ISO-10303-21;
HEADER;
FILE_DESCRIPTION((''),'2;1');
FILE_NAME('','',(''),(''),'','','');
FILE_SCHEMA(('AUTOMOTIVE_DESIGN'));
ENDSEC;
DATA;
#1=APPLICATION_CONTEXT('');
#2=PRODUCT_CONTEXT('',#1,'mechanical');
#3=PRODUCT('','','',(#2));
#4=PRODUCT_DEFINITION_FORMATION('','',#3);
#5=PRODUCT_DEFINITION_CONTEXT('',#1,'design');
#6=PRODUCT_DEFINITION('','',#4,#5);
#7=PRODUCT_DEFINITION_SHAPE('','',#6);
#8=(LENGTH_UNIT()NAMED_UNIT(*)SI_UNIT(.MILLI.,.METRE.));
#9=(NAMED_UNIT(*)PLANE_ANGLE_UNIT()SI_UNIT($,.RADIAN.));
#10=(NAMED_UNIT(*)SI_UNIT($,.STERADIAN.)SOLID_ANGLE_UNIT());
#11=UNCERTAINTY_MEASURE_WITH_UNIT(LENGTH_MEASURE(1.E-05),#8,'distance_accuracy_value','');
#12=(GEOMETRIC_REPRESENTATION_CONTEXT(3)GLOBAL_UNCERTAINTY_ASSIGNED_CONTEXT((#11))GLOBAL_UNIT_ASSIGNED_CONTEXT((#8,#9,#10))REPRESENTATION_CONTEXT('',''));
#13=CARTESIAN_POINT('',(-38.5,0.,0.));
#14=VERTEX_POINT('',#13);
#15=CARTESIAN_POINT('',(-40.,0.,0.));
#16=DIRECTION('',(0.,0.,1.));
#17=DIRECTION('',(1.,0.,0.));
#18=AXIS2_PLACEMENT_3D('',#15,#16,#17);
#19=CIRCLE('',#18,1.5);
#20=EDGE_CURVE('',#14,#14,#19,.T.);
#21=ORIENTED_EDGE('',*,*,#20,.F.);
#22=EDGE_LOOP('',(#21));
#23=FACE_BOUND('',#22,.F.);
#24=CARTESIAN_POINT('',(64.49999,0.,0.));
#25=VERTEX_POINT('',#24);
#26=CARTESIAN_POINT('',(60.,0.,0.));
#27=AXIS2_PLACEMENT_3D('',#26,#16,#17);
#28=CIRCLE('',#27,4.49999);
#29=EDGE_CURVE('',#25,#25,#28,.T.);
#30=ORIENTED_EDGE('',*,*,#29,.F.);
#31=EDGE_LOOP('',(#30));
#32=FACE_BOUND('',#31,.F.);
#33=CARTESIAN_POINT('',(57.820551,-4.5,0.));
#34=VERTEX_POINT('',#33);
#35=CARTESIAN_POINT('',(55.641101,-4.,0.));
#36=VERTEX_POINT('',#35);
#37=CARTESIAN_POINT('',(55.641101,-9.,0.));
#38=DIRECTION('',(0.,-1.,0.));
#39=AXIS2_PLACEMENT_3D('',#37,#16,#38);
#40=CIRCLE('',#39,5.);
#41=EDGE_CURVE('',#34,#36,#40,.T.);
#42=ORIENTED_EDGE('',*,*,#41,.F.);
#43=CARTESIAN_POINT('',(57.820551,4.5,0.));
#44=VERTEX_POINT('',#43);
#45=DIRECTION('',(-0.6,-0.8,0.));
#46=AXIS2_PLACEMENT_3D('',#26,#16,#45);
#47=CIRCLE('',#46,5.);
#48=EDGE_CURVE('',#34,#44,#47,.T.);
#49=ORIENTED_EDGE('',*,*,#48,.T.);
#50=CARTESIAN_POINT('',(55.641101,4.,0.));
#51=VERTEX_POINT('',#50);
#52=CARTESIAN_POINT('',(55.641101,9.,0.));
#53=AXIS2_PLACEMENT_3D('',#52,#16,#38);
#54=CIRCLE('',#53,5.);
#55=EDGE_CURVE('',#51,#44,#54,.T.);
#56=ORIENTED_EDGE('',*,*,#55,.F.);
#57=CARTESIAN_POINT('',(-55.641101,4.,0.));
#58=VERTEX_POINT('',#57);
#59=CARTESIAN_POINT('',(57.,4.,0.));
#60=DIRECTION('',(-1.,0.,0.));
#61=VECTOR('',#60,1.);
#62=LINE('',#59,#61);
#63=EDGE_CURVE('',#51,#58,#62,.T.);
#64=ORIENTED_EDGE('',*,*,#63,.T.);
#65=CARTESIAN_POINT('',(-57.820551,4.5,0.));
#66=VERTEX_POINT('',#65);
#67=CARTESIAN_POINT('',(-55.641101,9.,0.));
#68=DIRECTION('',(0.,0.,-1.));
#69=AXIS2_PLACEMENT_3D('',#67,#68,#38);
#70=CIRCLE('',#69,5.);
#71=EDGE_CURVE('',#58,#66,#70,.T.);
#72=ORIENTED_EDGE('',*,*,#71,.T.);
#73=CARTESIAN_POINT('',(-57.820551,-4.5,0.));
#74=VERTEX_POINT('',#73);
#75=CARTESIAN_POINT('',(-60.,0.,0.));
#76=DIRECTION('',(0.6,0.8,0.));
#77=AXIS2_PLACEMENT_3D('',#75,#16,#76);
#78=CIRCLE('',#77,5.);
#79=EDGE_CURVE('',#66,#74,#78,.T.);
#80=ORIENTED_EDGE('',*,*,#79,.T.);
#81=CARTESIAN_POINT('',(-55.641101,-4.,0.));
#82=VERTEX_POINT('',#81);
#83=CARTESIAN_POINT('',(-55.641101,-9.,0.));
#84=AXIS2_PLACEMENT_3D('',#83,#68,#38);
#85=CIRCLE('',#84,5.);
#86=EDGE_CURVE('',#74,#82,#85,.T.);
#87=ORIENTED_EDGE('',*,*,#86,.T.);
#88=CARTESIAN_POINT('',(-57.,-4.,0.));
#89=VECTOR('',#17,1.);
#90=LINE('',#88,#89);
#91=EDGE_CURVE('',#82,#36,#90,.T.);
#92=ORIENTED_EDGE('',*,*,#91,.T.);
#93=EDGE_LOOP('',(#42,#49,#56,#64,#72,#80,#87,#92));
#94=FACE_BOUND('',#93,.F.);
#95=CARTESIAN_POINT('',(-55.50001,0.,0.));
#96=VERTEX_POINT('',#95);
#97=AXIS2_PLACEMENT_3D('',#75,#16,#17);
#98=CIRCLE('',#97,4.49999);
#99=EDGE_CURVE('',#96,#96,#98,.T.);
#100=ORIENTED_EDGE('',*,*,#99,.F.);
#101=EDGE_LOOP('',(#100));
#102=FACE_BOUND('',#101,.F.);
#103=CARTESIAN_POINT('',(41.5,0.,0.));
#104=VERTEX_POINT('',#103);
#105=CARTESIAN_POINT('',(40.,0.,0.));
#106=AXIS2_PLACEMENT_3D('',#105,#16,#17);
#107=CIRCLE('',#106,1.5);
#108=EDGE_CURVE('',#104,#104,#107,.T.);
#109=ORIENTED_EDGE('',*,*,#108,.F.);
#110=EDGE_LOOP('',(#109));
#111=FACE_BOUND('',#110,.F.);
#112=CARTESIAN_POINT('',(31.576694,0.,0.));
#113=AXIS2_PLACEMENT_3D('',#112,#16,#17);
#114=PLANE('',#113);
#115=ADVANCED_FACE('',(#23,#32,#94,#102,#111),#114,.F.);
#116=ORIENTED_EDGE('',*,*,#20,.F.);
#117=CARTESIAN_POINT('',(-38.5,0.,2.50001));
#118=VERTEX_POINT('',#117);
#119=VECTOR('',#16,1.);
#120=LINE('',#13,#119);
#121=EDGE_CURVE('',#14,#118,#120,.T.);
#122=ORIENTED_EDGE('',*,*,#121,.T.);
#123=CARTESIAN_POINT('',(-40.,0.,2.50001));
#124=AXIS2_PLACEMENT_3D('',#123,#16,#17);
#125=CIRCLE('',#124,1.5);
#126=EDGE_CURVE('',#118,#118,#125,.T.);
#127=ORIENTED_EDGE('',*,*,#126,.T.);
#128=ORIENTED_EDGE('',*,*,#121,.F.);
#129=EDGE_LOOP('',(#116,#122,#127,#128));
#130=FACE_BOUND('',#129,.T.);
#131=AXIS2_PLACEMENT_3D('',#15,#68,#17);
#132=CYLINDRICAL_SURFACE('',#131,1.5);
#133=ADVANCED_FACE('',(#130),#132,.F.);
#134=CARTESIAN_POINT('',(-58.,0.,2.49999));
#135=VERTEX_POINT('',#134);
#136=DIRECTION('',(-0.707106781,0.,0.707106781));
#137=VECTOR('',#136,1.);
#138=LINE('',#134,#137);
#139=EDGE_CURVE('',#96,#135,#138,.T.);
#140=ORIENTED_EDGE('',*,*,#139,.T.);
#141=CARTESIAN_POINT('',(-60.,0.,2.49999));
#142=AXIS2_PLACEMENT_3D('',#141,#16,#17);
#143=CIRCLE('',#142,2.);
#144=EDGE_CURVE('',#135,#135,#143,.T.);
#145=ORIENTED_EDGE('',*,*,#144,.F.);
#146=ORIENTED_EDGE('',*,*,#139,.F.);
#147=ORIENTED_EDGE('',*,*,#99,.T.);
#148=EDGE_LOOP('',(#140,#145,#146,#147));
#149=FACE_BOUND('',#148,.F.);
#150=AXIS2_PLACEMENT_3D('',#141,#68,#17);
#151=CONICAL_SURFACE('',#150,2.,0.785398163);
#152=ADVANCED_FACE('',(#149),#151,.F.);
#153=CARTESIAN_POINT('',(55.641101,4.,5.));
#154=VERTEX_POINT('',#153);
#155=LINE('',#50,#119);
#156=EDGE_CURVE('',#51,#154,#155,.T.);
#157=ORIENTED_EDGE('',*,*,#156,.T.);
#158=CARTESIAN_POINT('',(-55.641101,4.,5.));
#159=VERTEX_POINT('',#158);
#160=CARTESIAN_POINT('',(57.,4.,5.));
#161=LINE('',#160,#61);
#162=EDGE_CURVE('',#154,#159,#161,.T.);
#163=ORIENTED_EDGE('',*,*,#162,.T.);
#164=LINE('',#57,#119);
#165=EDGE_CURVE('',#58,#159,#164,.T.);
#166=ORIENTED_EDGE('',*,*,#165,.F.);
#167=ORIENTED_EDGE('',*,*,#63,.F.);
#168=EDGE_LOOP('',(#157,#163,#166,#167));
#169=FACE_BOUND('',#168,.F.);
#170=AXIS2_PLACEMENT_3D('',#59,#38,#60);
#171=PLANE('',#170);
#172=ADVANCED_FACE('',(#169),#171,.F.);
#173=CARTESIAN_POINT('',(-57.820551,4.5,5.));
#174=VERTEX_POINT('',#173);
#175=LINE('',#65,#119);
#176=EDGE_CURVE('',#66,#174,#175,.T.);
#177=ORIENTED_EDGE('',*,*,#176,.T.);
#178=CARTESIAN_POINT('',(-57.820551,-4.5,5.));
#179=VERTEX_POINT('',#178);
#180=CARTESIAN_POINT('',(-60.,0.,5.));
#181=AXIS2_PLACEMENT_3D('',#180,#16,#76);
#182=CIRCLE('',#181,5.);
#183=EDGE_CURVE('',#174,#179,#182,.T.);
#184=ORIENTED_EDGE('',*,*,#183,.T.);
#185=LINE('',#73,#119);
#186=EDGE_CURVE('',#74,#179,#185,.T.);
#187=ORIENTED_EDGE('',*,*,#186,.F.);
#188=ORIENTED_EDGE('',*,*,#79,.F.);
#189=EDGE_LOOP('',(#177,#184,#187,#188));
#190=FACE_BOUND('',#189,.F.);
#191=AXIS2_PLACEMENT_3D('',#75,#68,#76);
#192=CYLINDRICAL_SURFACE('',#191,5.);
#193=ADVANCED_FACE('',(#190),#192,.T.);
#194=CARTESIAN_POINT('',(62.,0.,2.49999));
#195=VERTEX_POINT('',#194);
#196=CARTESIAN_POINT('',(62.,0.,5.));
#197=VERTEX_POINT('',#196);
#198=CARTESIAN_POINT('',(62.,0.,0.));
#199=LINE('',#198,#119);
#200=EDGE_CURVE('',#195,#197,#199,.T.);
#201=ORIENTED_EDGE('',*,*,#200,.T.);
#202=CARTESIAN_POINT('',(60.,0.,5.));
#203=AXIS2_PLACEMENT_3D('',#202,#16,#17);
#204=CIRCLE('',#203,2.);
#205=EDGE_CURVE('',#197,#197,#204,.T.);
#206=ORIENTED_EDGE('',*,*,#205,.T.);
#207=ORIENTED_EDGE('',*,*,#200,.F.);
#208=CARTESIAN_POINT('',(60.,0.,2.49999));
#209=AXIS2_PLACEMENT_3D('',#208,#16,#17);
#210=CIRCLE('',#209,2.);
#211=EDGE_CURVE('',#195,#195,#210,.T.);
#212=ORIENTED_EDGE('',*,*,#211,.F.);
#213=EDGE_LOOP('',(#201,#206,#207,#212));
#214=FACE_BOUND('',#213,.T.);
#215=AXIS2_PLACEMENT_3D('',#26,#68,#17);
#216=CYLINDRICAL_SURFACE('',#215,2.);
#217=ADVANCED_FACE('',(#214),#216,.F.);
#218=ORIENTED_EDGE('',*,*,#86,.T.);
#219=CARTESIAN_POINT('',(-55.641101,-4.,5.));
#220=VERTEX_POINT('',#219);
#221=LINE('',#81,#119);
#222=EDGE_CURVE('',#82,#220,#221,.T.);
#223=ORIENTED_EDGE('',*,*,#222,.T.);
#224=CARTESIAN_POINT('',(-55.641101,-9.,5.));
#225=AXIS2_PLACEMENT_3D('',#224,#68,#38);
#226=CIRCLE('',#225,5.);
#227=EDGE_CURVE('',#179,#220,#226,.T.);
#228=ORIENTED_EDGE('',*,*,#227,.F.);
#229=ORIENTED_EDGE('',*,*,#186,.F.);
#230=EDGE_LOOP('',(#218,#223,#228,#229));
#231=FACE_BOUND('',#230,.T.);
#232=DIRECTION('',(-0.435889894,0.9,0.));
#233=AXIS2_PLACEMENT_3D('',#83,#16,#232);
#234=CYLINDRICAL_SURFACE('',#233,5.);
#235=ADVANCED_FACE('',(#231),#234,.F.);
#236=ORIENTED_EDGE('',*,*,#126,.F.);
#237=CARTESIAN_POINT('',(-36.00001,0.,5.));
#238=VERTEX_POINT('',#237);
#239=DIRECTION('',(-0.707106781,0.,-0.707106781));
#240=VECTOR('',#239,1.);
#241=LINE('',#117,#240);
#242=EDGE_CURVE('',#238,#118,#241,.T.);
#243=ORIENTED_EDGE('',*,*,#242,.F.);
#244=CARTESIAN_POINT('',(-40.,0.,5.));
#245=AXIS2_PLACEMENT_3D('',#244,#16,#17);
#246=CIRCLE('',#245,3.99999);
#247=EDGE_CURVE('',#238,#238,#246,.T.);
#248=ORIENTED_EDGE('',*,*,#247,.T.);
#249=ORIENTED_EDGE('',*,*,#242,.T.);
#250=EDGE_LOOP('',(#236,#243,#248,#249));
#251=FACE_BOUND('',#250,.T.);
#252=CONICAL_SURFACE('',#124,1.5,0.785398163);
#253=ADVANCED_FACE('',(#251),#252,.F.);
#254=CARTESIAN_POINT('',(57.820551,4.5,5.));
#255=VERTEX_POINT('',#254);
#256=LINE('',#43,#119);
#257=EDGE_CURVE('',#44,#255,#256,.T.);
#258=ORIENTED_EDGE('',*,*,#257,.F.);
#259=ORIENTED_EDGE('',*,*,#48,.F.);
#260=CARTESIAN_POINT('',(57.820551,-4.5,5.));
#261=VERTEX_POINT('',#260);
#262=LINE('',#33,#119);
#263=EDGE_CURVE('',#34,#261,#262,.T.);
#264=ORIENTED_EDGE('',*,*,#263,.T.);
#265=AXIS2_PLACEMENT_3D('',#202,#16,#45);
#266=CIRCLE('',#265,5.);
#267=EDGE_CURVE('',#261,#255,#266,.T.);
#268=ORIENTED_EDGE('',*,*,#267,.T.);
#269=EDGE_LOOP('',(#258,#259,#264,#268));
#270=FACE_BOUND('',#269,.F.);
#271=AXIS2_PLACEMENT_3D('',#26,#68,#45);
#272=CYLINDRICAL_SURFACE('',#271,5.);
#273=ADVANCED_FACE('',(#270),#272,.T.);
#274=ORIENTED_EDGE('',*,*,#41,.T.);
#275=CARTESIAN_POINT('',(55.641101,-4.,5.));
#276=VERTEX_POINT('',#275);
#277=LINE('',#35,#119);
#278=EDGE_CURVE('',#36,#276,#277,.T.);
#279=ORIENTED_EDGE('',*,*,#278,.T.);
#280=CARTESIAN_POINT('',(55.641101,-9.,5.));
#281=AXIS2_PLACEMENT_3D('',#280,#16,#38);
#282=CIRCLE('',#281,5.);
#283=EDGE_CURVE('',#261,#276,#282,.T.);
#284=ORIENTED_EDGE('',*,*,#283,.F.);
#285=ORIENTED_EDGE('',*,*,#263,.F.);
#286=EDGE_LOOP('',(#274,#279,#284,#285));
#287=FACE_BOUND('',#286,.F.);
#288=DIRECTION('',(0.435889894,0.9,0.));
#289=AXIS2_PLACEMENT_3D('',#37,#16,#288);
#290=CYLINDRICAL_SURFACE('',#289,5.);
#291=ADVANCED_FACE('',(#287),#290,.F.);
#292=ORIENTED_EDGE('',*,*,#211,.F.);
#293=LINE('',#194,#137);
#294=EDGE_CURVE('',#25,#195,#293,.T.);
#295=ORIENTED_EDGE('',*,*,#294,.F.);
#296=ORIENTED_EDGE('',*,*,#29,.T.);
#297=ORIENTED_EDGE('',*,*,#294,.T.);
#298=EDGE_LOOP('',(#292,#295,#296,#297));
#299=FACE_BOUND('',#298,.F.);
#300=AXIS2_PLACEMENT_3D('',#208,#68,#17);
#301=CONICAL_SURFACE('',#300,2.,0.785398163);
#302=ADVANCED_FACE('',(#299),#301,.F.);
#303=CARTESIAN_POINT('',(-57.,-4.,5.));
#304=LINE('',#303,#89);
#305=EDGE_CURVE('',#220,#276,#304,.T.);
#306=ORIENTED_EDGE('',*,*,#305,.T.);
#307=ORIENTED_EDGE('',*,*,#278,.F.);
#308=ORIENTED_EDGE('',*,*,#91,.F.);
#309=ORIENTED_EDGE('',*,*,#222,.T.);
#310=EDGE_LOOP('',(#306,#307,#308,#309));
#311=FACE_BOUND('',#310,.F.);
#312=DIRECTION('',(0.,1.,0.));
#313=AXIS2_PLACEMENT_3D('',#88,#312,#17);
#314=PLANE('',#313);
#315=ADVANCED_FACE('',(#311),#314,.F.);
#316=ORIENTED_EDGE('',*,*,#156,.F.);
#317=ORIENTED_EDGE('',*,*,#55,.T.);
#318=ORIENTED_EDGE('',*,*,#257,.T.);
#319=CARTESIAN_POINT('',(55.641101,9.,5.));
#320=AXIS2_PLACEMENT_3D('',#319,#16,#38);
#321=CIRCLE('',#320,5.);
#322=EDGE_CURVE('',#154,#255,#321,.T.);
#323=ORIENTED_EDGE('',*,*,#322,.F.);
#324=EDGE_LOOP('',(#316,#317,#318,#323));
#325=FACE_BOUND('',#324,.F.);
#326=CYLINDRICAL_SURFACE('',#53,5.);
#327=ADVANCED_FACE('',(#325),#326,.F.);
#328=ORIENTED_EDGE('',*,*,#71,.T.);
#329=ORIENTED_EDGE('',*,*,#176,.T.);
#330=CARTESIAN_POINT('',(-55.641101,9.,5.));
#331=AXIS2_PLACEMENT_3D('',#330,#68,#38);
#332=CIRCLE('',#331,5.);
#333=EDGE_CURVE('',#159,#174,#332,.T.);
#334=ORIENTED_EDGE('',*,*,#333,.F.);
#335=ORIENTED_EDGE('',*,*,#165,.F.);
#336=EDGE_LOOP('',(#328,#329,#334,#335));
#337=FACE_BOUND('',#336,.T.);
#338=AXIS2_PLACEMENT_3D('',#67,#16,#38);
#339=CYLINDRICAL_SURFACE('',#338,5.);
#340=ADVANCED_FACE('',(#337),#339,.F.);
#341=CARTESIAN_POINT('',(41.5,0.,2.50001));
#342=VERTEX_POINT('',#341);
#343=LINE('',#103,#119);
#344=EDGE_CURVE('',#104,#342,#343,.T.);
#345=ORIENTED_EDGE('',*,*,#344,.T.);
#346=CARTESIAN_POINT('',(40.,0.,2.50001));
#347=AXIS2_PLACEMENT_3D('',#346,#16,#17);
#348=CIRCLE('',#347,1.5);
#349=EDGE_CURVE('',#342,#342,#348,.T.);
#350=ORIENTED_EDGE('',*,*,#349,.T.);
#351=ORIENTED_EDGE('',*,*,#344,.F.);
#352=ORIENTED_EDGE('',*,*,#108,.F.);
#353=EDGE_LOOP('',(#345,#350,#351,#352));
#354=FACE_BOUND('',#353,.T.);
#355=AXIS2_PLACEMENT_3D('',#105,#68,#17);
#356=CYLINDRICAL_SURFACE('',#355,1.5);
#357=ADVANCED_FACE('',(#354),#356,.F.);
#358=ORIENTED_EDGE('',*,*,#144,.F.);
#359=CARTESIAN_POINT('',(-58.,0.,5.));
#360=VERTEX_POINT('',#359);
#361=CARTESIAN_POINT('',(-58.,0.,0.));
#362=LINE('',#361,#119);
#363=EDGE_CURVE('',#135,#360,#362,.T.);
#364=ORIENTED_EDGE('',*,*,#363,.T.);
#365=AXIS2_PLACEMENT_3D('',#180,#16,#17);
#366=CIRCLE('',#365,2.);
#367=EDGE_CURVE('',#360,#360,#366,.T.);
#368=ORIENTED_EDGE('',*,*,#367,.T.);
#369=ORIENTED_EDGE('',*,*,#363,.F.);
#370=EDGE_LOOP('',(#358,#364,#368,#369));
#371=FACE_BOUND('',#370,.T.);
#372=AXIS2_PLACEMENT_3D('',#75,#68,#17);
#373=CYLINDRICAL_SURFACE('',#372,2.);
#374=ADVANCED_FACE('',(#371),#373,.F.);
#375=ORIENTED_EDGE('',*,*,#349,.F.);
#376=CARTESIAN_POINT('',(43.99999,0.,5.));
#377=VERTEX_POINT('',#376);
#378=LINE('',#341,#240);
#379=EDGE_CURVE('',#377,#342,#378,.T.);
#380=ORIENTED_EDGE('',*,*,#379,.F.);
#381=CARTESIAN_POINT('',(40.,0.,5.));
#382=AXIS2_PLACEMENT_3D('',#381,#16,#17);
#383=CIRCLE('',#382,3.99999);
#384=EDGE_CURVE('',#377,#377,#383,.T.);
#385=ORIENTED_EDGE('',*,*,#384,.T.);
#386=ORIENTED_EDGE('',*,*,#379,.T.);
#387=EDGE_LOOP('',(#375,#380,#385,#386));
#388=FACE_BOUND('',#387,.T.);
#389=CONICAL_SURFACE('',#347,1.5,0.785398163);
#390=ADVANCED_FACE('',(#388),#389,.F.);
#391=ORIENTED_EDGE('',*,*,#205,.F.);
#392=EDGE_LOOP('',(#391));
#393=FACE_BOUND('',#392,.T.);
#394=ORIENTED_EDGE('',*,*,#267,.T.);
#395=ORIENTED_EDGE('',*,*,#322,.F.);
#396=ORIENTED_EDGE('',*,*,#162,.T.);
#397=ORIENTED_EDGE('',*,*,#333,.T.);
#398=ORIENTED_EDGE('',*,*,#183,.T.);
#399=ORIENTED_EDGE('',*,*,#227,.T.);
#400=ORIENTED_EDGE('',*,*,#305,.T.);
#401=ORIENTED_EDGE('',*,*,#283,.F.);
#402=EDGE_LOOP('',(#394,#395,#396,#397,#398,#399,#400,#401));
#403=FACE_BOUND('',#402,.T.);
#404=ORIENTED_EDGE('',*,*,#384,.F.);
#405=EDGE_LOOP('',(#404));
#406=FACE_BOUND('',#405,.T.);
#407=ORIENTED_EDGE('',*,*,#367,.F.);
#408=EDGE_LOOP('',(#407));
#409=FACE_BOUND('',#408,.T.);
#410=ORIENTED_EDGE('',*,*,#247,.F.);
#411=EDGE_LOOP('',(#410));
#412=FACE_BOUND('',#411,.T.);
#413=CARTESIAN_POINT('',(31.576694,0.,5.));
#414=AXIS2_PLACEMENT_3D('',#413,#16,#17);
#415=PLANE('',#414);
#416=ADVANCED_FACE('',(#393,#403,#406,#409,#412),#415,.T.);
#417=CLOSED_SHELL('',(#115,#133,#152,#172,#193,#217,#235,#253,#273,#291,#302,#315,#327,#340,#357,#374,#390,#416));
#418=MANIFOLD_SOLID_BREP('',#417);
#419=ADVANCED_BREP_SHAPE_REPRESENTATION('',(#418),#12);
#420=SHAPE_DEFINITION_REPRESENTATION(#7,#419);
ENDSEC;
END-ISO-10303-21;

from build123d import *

# Parameters (mm, degrees)
F0_R     = 1.5
F0_R_2   = 2
F1_DEPTH = 5
F2_R     = 5
F3_SIZE2 = 2.49999
F3_SIZE  = 2.49999


# Not quite as in the source:
# - a fillet or chamfer is up to 0.001 mm smaller than in the source, because OpenCascade refuses the exact size


with BuildPart() as f1:
    # F0 (on Top) → F1 (new body)
    with BuildSketch(Plane.XY):
        with BuildLine():
            Line((57, 4), (0, 4))
            Line((0, 4), (0, -4))
            Line((0, -4), (57, -4))
            ThreePointArc((57, -4), (65, 0), (57, 4))
        make_face()
        with Locations((40, 0)):
            Circle(F0_R, mode=Mode.SUBTRACT)
        with Locations((60, 0)):
            Circle(F0_R_2, mode=Mode.SUBTRACT)
        with BuildLine():
            Line((0, 4), (-57, 4))
            ThreePointArc((-57, 4), (-65, 0), (-57, -4))
            Line((-57, -4), (0, -4))
            Line((0, -4), (0, 4))
        make_face()
        with Locations((-60, 0)):
            Circle(F0_R_2, mode=Mode.SUBTRACT)
        with Locations((-40, 0)):
            Circle(F0_R, mode=Mode.SUBTRACT)
    extrude(amount=F1_DEPTH)

    # F2
    f2_edges = [f1.edges().sort_by_distance(p)[0] for p in [
        (-57, 4, 2.5),
        (-57, -4, 2.5),
        (57, -4, 2.5),
        (57, 4, 2.5),
    ]]
    fillet(f2_edges, radius=F2_R)

    # F3 (size 2.5 and 2.5 in the source; OpenCascade refuses exactly that, so slightly less here)
    f3_edges = [f1.edges().sort_by_distance(p)[0] for p in [
        (38.5, 0, 5),
        (-41.5, 0, 5),
        (-62, 0, 0),
        (58, 0, 0),
    ]]
    chamfer(f3_edges, length=F3_SIZE, length2=F3_SIZE2)


solid = f1.part
